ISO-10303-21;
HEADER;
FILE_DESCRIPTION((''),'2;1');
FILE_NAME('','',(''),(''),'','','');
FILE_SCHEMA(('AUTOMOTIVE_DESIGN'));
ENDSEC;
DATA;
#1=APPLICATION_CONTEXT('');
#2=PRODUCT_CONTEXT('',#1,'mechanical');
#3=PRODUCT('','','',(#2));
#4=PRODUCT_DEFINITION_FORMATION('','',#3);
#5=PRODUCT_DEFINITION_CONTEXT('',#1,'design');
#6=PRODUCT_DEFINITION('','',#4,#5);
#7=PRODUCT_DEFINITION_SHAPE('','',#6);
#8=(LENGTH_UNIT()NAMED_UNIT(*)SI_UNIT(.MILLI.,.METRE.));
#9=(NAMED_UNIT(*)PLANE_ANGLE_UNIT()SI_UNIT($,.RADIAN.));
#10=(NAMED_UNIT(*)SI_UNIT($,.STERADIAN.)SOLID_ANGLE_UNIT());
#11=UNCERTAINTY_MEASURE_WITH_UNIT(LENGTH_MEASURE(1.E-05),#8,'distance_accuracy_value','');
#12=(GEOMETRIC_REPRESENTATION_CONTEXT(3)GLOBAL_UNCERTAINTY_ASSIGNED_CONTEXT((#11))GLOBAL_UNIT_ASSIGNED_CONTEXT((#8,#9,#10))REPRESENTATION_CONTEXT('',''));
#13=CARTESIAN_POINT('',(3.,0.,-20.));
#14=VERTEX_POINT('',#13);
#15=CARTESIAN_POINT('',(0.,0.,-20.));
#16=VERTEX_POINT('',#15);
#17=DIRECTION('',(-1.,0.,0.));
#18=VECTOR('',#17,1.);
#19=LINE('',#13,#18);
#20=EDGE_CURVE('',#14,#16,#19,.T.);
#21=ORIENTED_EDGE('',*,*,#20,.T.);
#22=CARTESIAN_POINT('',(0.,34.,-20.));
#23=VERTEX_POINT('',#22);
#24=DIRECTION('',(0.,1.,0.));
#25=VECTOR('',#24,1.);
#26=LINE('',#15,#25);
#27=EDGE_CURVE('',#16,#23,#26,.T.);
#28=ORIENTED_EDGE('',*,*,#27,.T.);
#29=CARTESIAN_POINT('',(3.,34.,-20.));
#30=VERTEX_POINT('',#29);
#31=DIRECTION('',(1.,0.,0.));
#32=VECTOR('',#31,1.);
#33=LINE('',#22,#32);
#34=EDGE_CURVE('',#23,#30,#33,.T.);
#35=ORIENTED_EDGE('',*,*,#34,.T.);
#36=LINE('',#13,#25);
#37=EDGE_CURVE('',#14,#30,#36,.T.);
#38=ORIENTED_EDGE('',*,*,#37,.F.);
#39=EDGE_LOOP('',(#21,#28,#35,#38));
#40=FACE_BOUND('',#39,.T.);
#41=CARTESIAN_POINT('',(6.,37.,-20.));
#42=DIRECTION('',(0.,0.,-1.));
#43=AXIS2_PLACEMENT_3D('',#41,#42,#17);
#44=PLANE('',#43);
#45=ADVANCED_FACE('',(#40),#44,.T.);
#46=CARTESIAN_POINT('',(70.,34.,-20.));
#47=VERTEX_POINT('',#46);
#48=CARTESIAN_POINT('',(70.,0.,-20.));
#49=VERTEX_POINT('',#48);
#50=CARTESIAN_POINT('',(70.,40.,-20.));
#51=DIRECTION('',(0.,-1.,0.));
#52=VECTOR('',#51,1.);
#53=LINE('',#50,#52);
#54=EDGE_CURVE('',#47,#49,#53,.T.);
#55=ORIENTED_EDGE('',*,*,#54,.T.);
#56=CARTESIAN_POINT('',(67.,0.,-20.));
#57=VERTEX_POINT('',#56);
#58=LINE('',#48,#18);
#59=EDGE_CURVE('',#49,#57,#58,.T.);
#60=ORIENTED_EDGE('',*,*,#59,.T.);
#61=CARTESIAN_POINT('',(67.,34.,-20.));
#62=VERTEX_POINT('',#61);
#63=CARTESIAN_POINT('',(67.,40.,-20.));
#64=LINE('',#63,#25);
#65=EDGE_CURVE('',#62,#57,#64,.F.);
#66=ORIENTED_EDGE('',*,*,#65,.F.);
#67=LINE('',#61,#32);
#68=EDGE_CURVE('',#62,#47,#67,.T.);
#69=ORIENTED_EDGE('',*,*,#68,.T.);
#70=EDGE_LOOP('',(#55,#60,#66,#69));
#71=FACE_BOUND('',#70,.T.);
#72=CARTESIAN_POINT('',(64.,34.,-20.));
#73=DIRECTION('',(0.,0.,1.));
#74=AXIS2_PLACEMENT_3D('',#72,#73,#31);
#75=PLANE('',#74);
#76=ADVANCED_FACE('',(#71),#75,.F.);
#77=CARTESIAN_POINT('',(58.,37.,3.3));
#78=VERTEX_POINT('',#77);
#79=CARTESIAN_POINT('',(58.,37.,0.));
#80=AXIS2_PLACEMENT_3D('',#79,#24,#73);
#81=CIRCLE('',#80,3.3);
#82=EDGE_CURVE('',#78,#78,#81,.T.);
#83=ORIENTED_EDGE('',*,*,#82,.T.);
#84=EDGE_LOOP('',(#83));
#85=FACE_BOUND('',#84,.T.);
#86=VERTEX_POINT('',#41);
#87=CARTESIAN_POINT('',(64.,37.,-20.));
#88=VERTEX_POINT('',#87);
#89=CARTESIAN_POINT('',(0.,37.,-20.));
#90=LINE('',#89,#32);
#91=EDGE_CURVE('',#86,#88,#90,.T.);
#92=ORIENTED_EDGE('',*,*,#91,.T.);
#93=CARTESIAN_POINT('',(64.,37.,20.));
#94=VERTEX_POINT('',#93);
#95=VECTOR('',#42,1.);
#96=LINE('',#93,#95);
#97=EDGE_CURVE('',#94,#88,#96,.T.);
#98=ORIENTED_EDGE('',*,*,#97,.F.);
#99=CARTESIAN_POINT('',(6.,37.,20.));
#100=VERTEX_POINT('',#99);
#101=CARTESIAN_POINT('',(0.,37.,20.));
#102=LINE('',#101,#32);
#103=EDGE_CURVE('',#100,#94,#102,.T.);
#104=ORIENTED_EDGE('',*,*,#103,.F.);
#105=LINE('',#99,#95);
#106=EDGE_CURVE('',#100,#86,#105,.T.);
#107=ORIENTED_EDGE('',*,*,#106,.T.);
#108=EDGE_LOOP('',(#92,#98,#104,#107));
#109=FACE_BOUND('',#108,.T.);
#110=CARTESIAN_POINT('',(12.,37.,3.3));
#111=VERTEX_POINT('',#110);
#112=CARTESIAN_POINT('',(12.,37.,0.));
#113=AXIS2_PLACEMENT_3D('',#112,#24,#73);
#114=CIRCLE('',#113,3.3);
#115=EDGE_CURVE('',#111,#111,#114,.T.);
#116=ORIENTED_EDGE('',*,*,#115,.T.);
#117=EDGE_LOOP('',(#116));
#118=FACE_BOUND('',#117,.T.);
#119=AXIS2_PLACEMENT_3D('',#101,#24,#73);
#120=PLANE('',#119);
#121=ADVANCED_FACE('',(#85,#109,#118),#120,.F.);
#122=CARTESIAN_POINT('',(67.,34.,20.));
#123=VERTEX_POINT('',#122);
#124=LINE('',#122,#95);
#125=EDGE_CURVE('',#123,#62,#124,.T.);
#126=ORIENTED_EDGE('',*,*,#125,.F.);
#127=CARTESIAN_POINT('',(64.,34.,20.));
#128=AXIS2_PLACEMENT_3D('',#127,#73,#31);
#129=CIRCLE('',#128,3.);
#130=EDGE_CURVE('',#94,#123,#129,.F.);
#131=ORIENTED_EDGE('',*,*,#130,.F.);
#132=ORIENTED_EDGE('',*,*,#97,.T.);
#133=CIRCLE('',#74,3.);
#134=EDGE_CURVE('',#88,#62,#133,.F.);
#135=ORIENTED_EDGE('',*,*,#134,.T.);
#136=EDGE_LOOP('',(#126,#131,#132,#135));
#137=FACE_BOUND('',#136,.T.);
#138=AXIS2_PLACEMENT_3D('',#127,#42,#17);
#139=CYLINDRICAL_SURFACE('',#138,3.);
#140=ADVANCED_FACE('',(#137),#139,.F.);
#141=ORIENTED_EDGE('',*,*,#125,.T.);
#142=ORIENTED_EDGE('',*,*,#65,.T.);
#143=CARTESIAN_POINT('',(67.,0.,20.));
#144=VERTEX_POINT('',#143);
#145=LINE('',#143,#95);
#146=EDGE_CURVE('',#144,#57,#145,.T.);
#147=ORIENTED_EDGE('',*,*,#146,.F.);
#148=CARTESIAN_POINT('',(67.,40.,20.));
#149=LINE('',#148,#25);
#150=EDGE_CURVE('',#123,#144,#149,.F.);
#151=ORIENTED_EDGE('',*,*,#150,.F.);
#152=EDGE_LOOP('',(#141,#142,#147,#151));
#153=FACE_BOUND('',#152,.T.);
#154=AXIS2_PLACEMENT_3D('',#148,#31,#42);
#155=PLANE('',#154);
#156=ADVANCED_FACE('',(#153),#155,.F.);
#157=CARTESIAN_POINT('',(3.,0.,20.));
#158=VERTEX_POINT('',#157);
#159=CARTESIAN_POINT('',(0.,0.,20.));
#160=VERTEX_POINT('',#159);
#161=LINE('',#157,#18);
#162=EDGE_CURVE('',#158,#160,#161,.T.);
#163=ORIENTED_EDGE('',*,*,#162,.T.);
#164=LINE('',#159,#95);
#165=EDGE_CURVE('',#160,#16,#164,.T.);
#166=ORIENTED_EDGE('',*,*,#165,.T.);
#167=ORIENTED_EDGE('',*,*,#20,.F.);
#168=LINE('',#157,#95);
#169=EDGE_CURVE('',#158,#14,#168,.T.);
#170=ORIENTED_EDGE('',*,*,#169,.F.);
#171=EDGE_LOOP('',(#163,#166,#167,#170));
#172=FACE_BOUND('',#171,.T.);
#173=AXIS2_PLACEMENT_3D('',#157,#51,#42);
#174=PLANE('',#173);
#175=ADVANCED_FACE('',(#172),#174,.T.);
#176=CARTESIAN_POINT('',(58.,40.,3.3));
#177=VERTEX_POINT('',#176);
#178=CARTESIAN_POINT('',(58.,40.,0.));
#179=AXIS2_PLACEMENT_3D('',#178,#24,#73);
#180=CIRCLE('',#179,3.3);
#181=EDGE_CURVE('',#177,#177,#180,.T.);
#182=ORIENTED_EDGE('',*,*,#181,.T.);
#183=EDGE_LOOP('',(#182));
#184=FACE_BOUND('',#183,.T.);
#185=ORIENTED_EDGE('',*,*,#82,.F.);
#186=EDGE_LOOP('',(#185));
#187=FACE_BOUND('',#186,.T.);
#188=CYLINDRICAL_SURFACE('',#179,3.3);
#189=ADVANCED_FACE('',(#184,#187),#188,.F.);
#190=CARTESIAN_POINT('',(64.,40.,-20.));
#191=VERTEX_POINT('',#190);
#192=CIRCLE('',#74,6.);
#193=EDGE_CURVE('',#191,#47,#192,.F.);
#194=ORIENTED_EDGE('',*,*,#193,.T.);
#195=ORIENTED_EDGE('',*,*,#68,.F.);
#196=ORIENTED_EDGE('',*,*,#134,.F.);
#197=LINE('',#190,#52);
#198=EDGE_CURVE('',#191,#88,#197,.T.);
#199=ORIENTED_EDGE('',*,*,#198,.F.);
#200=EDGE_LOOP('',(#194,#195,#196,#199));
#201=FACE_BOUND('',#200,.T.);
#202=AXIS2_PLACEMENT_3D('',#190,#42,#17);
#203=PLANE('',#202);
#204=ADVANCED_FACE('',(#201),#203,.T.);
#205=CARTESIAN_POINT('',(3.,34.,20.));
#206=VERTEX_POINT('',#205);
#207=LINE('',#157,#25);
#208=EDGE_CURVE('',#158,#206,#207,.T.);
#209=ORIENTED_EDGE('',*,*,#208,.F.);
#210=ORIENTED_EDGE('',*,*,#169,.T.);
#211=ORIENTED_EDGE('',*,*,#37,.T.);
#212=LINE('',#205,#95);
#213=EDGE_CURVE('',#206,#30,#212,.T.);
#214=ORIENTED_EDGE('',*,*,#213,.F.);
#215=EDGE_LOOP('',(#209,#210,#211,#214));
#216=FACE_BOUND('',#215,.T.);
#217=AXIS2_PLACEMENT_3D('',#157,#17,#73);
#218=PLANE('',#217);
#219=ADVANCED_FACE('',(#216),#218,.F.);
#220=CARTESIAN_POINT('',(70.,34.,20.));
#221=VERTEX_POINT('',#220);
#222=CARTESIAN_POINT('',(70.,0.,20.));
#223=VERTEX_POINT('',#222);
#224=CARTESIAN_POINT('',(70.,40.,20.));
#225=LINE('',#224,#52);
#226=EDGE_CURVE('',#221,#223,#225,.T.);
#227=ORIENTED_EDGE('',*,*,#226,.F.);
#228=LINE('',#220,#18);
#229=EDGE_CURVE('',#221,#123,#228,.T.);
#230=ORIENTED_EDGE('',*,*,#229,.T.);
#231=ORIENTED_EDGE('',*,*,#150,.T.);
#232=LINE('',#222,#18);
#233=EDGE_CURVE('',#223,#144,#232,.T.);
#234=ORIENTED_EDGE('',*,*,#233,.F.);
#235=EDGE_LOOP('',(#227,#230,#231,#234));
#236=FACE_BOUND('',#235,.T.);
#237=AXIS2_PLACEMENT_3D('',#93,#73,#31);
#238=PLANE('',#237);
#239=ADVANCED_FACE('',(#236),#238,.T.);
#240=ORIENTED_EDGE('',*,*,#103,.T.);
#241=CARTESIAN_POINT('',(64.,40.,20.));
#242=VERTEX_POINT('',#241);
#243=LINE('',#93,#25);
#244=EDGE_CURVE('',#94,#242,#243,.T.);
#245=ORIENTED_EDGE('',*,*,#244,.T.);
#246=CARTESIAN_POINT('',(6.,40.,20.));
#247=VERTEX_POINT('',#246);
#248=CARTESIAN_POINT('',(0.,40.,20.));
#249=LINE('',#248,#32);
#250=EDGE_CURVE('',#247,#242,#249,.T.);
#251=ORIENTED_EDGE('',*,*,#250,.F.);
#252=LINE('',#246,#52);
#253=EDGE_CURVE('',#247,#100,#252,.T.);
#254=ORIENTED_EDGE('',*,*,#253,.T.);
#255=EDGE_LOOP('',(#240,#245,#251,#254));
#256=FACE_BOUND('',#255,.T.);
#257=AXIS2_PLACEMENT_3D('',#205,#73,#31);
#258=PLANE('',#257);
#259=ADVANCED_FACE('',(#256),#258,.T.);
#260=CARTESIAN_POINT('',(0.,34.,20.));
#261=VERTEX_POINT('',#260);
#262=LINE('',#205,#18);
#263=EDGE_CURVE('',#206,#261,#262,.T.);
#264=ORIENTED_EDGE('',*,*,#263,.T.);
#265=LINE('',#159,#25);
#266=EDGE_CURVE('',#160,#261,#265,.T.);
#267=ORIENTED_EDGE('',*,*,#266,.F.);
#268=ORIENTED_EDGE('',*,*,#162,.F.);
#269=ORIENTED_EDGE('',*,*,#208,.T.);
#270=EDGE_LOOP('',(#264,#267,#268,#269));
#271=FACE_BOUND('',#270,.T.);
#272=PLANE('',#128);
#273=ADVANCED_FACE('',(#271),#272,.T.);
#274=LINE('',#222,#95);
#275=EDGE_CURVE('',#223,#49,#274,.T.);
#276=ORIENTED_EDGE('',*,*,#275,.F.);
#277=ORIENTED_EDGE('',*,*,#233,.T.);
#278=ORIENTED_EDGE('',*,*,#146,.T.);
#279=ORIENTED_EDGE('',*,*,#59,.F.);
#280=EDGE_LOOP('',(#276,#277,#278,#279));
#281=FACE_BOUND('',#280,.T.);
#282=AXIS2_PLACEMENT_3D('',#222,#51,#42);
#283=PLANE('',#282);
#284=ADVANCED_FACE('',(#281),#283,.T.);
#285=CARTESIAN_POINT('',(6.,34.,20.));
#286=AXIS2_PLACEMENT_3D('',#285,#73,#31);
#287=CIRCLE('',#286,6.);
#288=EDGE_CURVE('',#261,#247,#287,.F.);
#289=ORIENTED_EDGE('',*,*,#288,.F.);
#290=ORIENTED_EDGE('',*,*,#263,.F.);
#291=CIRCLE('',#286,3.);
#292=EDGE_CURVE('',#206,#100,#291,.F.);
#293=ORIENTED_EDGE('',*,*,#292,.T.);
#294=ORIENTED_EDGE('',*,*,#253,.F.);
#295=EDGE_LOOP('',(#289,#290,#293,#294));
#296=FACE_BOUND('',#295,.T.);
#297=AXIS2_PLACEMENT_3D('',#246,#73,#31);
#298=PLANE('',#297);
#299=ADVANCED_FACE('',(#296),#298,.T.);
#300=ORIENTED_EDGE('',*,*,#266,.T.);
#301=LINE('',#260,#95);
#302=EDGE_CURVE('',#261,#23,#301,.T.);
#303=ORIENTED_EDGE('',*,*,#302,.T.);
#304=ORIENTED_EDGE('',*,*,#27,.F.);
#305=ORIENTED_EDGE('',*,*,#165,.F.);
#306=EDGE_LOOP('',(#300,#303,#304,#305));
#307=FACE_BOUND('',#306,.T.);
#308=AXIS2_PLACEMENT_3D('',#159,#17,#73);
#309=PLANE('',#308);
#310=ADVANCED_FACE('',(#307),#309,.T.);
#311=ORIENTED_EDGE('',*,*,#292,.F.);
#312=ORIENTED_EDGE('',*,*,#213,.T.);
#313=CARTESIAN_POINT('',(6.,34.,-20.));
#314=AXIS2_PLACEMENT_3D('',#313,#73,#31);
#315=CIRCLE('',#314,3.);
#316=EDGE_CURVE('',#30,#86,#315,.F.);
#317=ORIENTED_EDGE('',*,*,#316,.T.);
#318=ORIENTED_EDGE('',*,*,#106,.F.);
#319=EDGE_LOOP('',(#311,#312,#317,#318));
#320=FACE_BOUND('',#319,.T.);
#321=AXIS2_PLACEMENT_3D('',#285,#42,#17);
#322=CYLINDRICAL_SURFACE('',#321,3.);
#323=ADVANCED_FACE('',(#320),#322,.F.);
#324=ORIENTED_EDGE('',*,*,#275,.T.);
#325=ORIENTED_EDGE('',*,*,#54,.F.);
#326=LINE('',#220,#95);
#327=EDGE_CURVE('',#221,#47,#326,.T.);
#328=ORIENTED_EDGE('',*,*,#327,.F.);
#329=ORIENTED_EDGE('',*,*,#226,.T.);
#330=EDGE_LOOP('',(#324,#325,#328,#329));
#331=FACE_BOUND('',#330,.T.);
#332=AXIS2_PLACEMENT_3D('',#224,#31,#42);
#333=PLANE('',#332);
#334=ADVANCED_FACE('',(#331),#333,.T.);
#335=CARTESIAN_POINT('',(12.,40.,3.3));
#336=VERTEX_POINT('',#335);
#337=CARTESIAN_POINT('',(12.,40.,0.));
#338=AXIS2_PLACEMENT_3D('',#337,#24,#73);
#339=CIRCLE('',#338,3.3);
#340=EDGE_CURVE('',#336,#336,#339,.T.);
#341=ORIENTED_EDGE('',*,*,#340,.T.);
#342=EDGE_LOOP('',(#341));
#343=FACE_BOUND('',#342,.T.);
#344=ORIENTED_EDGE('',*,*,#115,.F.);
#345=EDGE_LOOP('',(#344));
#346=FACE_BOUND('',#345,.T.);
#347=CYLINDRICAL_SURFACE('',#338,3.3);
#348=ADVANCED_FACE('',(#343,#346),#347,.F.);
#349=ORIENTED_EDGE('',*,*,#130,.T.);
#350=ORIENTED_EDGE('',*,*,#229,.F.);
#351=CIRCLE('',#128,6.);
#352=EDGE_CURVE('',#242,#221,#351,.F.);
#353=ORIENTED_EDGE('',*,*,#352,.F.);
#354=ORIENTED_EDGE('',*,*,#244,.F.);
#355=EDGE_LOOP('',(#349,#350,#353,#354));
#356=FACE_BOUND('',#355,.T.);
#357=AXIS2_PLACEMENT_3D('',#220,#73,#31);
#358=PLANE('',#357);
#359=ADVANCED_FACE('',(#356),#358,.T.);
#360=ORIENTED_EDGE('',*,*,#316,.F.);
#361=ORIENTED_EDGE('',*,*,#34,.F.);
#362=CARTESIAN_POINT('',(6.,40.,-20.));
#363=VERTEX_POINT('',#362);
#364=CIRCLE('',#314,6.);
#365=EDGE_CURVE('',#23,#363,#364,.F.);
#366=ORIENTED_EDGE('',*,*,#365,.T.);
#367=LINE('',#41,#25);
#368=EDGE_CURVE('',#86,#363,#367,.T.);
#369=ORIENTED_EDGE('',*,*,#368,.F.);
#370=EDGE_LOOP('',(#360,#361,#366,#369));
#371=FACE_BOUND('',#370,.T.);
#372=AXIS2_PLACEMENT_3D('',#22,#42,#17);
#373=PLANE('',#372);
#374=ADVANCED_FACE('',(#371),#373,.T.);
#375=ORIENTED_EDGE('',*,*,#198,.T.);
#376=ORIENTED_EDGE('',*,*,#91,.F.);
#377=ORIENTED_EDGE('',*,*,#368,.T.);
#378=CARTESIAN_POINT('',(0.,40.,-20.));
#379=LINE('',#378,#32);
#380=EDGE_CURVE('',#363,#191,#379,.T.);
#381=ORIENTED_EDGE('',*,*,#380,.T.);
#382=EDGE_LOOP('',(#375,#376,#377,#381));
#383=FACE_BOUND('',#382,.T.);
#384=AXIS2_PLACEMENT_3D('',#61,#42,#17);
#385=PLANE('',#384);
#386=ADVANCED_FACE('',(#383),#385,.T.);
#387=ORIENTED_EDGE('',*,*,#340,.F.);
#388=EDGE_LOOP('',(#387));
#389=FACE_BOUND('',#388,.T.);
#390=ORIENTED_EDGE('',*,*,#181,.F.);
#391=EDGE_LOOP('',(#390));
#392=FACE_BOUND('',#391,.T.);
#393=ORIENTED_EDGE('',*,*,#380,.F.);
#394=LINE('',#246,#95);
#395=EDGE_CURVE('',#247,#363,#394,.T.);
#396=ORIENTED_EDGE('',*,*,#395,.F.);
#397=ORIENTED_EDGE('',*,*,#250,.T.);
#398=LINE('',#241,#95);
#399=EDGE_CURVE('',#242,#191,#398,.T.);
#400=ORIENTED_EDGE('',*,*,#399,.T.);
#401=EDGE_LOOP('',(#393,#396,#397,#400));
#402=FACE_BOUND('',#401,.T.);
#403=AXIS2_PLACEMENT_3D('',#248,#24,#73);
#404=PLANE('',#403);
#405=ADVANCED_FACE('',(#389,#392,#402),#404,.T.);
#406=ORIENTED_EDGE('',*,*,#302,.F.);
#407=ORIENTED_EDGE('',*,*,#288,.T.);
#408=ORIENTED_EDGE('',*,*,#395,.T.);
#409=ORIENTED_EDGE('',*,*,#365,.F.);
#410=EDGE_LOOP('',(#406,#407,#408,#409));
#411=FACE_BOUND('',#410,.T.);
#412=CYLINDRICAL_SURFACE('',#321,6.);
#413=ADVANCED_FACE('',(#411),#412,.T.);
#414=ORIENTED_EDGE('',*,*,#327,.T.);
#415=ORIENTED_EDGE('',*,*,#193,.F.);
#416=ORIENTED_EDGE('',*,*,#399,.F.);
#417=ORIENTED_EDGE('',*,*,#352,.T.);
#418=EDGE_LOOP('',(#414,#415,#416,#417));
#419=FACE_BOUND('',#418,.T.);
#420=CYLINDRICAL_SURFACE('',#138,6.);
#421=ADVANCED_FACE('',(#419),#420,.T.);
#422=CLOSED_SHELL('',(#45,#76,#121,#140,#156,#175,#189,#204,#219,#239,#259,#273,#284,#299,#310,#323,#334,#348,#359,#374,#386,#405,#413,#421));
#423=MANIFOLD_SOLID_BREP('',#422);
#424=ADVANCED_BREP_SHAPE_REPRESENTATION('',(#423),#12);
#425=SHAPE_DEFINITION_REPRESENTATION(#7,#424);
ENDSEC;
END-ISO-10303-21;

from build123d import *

# Parameters (mm, degrees)
SM_BASE_FLANGE_1_DEPTH  = 20
HOLE_WIZARD_6_6_6_6_1_D = 6.6


# Sheet-metal steps are written as plain solids
with BuildPart() as part:
    # Sketch 1 → Базовая кромка1 (new, symmetric)
    with BuildSketch(Plane.XY):
        with BuildLine():
            Line((0, 0), (0, 34))
            ThreePointArc((0, 34), (1.757359313, 38.242640687), (6, 40))
            Line((6, 40), (64, 40))
            ThreePointArc((64, 40), (68.242640687, 38.242640687), (70, 34))
            Line((70, 34), (70, 0))
            Line((70, 0), (67, 0))
            Line((67, 0), (67, 34))
            ThreePointArc((67, 34), (66.121320344, 36.121320344), (64, 37))
            Line((64, 37), (6, 37))
            ThreePointArc((6, 37), (3.878679656, 36.121320344), (3, 34))
            Line((3, 34), (3, 0))
            Line((3, 0), (0, 0))
        make_face()
    extrude(amount=SM_BASE_FLANGE_1_DEPTH, both=True)

    # Диаметр отверстия Ø6.6 (6.6)1 (through all)
    with Locations(Plane(origin=(0, 40, 0), x_dir=(1, 0, 0), z_dir=(0, 1, 0))):
        with Locations((12, 0), (58, 0)):
            Hole(HOLE_WIZARD_6_6_6_6_1_D / 2)


solid = part.part
